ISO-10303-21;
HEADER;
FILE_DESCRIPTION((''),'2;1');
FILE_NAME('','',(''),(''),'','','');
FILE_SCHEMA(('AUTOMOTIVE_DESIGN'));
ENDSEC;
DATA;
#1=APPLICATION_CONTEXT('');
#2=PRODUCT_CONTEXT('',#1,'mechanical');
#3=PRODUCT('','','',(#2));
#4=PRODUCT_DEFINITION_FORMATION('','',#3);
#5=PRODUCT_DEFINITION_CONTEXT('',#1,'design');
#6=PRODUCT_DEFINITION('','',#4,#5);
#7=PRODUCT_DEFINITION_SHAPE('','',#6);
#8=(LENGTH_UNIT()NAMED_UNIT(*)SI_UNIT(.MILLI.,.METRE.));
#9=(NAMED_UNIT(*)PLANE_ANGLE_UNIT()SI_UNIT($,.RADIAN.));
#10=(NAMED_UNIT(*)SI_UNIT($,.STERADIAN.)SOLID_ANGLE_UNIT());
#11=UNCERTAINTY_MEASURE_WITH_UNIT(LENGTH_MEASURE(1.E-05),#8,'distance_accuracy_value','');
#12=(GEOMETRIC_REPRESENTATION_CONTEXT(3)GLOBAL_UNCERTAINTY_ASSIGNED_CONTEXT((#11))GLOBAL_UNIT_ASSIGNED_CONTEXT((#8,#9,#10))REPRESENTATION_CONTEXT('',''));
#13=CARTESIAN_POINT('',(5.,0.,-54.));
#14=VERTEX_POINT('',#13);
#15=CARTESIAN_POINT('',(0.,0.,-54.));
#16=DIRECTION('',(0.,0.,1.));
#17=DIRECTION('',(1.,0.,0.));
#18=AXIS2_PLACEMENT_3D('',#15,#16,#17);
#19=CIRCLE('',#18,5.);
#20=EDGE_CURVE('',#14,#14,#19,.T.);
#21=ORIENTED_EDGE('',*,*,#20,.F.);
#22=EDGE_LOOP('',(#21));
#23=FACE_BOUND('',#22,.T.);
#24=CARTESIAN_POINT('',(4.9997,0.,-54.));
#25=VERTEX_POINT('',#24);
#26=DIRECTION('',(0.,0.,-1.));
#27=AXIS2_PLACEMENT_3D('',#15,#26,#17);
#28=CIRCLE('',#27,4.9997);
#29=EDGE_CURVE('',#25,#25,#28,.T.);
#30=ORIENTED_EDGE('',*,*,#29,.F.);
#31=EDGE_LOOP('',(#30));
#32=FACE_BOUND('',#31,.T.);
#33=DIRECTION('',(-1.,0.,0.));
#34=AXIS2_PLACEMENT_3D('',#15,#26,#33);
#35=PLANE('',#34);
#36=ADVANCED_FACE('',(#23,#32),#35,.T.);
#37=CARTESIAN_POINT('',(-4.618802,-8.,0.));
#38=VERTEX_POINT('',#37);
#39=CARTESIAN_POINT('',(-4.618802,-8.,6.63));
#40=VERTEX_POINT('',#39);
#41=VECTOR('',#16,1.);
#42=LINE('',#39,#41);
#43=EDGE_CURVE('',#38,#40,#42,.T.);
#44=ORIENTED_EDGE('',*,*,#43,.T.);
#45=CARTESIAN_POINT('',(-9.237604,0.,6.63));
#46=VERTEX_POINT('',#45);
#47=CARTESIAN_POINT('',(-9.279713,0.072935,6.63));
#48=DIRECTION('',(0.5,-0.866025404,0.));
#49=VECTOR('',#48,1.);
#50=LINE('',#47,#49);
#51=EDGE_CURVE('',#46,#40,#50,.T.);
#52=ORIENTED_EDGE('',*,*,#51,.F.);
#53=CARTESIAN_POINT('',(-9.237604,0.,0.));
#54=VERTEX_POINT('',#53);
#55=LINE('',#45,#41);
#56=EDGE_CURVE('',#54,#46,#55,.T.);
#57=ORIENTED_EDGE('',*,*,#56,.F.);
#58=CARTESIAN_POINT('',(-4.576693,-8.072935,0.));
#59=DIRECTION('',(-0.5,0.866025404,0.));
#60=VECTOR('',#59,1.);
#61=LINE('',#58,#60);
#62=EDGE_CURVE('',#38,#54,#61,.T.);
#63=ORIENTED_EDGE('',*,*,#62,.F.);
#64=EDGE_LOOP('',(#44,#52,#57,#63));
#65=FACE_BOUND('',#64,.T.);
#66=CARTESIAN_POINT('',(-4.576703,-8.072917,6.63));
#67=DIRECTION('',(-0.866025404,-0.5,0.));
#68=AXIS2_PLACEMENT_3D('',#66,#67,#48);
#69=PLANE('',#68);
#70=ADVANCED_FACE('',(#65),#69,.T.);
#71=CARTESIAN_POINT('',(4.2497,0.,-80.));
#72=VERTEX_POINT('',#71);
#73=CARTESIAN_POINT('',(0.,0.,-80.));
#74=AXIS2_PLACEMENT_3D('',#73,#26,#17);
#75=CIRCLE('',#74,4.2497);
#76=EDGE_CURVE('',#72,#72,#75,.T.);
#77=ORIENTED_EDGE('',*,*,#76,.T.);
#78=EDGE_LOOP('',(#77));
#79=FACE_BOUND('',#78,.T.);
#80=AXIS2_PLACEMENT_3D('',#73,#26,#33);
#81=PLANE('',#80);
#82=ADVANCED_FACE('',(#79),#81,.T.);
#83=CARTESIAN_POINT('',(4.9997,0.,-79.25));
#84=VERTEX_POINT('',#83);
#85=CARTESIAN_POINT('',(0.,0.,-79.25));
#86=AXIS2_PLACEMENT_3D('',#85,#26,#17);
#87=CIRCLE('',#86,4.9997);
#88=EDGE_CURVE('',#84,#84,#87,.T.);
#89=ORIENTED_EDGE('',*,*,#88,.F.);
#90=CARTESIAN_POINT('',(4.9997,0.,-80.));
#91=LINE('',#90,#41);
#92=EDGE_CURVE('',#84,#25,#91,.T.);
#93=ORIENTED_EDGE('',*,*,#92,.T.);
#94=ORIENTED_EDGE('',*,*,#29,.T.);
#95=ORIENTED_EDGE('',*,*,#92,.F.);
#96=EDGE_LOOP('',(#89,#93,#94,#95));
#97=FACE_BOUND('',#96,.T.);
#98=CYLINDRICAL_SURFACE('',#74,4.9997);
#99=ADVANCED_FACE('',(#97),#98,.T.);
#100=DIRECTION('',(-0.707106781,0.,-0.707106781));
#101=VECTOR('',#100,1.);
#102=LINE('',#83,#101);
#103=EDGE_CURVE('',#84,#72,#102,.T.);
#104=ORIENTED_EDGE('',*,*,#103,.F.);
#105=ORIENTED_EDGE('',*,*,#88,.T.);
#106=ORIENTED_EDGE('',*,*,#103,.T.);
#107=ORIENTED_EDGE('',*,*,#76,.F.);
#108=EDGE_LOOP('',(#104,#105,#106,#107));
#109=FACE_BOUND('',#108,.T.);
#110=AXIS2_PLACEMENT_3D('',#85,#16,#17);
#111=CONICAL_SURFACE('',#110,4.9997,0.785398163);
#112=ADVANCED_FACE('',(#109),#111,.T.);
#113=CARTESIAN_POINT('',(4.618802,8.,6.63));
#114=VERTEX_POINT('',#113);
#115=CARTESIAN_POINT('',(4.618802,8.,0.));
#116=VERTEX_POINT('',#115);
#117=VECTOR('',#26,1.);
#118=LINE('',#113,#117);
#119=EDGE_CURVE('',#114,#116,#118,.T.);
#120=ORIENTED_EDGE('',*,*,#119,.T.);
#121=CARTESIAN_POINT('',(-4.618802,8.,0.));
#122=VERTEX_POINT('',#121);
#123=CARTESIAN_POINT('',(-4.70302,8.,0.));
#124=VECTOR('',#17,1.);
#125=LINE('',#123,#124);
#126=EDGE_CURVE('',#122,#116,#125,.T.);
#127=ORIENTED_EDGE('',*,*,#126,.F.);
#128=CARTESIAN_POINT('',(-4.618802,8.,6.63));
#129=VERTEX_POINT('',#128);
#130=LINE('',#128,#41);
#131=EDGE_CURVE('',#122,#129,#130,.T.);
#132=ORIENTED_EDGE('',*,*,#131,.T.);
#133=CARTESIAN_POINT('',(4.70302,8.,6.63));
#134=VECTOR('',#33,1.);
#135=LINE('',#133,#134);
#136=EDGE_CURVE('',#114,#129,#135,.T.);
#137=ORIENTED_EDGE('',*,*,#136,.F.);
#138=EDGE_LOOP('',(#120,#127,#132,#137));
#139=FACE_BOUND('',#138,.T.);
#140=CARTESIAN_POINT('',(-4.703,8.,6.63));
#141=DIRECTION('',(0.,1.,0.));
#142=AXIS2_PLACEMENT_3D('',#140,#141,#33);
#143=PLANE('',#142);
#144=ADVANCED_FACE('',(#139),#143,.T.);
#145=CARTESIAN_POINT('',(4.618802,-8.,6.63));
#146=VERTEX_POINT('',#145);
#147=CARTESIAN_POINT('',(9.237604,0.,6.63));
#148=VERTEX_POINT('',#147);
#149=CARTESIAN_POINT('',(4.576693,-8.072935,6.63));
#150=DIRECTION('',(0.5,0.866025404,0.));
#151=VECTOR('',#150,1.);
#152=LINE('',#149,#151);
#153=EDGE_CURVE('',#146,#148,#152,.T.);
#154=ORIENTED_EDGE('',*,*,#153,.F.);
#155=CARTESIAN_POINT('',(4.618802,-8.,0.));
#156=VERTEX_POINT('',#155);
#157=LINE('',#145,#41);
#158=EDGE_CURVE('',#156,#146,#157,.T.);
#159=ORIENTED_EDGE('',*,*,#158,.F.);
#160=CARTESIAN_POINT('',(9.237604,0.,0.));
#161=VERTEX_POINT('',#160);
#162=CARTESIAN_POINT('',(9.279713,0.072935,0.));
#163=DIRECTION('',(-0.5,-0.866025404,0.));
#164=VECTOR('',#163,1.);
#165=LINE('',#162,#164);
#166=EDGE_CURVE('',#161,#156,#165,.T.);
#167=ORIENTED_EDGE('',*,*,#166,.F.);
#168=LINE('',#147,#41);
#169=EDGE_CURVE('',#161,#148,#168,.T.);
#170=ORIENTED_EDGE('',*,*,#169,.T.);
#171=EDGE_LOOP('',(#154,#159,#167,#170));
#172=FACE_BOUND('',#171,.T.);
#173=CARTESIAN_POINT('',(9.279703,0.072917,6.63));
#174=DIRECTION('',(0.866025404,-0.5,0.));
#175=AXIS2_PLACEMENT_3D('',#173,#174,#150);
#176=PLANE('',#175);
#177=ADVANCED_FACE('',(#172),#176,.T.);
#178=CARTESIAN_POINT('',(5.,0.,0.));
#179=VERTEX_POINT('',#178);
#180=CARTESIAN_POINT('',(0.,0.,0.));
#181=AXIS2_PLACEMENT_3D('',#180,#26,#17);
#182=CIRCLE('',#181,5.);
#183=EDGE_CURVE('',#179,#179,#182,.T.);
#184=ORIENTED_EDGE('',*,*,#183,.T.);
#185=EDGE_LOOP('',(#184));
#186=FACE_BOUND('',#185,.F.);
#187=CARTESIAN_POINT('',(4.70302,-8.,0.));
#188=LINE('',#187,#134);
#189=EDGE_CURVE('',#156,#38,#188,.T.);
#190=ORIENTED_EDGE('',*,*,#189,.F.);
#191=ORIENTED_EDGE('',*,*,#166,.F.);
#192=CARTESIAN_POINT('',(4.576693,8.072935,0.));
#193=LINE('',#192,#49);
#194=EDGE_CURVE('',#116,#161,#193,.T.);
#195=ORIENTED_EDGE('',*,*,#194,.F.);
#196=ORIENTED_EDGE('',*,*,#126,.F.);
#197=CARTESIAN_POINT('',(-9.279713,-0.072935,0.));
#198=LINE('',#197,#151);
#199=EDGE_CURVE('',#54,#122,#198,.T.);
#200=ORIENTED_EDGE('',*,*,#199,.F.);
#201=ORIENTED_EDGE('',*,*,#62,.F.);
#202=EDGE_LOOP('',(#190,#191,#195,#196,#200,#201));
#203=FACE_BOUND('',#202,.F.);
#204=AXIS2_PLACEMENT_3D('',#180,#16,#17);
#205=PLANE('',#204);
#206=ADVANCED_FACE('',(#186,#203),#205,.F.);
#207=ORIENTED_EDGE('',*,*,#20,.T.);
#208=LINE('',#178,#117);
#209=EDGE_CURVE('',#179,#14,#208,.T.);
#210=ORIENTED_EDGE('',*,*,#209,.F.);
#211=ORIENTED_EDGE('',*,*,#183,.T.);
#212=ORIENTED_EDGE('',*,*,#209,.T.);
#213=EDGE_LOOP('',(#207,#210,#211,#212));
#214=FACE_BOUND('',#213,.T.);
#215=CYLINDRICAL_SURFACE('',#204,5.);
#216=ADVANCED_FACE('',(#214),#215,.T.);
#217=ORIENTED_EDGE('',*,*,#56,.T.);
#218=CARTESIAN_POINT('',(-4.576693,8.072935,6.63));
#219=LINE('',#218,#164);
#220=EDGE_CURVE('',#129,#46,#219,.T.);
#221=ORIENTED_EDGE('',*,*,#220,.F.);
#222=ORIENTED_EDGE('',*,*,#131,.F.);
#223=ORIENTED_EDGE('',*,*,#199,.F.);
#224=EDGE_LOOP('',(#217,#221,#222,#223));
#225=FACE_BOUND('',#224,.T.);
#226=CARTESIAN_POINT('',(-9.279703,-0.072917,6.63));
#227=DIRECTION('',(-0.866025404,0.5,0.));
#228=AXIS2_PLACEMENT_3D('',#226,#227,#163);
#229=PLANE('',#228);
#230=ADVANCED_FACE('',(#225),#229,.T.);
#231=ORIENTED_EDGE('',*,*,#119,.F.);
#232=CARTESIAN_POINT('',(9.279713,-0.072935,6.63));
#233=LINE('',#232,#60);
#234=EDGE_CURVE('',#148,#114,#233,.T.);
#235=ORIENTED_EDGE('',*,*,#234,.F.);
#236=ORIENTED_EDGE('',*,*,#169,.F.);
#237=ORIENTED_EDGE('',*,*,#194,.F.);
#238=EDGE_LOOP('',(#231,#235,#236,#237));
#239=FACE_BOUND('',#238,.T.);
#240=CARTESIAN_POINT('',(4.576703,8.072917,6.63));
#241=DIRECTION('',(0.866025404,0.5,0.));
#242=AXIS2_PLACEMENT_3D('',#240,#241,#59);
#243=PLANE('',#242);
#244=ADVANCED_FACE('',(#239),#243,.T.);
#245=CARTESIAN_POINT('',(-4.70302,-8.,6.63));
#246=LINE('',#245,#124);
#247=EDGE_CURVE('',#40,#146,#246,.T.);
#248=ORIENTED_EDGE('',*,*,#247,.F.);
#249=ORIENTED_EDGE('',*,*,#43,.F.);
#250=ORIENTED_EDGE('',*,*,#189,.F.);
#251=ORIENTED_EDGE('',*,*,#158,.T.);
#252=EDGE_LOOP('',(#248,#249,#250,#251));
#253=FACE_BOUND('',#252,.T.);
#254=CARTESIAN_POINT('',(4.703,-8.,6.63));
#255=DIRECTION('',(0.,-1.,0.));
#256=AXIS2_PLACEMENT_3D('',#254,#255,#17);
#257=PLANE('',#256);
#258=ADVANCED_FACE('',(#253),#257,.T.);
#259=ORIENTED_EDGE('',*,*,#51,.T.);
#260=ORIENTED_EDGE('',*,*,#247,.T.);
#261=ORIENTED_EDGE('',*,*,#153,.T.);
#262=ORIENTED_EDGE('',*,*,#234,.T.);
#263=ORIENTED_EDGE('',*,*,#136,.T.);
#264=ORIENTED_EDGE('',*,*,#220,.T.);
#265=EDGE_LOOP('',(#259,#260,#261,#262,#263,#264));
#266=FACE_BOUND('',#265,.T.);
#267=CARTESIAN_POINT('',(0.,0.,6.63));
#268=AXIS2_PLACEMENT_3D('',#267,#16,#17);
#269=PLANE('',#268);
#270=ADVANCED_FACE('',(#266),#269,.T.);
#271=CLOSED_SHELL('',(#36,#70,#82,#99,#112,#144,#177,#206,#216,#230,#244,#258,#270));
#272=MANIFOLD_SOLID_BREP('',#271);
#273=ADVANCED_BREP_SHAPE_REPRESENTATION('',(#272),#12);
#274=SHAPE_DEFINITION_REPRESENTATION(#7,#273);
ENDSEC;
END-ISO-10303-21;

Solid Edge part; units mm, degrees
sketch "Sketch1" plane through (0, 0, 0) normal (0, 0, 1) x (1, 0, 0)
  circle A0 centre (0, 0) radius 9.28
  dimension "D1" = 18.56
extrude "Protrusion1" add sketch "Sketch1" along normal blind 6.63
sketch "Sketch2" plane through (0, 0, 0) normal (0, 0, -1) x (1, 0, 0)
  circle A0 centre (0, 0) radius 5
extrude "Protrusion2" add sketch "Sketch2" along normal blind 80
sketch "Sketch3" plane through (0, 0, -80) normal (0, 0, -1) x (1, 0, 0)
  circle A0 centre (0, 0) radius 4.9997
extrude "Cutout1" cut sketch "Sketch3" against normal blind 26 flip side to cut
chamfer "Chamfer_1" distance 0.75 angle 45 1 edges at (-4.9997, 0, -80)
sketch "Sketch4" plane through (0, 0, 6.63) normal (0, 0, 1) x (1, 0, 0)
  line L0 (-4.703, 8) -> (4.703, 8)
  dimension "D1" = 16
extrude "Cutout2" cut sketch "Sketch4" against normal up to next material side at (0, 8.05, 6.63)
pattern_circular "Pattern1" count 6 over 360 about axis through (0, 0, 6.63) along (0, 0, 1) of "Cutout2"
properties part number "24104504"
